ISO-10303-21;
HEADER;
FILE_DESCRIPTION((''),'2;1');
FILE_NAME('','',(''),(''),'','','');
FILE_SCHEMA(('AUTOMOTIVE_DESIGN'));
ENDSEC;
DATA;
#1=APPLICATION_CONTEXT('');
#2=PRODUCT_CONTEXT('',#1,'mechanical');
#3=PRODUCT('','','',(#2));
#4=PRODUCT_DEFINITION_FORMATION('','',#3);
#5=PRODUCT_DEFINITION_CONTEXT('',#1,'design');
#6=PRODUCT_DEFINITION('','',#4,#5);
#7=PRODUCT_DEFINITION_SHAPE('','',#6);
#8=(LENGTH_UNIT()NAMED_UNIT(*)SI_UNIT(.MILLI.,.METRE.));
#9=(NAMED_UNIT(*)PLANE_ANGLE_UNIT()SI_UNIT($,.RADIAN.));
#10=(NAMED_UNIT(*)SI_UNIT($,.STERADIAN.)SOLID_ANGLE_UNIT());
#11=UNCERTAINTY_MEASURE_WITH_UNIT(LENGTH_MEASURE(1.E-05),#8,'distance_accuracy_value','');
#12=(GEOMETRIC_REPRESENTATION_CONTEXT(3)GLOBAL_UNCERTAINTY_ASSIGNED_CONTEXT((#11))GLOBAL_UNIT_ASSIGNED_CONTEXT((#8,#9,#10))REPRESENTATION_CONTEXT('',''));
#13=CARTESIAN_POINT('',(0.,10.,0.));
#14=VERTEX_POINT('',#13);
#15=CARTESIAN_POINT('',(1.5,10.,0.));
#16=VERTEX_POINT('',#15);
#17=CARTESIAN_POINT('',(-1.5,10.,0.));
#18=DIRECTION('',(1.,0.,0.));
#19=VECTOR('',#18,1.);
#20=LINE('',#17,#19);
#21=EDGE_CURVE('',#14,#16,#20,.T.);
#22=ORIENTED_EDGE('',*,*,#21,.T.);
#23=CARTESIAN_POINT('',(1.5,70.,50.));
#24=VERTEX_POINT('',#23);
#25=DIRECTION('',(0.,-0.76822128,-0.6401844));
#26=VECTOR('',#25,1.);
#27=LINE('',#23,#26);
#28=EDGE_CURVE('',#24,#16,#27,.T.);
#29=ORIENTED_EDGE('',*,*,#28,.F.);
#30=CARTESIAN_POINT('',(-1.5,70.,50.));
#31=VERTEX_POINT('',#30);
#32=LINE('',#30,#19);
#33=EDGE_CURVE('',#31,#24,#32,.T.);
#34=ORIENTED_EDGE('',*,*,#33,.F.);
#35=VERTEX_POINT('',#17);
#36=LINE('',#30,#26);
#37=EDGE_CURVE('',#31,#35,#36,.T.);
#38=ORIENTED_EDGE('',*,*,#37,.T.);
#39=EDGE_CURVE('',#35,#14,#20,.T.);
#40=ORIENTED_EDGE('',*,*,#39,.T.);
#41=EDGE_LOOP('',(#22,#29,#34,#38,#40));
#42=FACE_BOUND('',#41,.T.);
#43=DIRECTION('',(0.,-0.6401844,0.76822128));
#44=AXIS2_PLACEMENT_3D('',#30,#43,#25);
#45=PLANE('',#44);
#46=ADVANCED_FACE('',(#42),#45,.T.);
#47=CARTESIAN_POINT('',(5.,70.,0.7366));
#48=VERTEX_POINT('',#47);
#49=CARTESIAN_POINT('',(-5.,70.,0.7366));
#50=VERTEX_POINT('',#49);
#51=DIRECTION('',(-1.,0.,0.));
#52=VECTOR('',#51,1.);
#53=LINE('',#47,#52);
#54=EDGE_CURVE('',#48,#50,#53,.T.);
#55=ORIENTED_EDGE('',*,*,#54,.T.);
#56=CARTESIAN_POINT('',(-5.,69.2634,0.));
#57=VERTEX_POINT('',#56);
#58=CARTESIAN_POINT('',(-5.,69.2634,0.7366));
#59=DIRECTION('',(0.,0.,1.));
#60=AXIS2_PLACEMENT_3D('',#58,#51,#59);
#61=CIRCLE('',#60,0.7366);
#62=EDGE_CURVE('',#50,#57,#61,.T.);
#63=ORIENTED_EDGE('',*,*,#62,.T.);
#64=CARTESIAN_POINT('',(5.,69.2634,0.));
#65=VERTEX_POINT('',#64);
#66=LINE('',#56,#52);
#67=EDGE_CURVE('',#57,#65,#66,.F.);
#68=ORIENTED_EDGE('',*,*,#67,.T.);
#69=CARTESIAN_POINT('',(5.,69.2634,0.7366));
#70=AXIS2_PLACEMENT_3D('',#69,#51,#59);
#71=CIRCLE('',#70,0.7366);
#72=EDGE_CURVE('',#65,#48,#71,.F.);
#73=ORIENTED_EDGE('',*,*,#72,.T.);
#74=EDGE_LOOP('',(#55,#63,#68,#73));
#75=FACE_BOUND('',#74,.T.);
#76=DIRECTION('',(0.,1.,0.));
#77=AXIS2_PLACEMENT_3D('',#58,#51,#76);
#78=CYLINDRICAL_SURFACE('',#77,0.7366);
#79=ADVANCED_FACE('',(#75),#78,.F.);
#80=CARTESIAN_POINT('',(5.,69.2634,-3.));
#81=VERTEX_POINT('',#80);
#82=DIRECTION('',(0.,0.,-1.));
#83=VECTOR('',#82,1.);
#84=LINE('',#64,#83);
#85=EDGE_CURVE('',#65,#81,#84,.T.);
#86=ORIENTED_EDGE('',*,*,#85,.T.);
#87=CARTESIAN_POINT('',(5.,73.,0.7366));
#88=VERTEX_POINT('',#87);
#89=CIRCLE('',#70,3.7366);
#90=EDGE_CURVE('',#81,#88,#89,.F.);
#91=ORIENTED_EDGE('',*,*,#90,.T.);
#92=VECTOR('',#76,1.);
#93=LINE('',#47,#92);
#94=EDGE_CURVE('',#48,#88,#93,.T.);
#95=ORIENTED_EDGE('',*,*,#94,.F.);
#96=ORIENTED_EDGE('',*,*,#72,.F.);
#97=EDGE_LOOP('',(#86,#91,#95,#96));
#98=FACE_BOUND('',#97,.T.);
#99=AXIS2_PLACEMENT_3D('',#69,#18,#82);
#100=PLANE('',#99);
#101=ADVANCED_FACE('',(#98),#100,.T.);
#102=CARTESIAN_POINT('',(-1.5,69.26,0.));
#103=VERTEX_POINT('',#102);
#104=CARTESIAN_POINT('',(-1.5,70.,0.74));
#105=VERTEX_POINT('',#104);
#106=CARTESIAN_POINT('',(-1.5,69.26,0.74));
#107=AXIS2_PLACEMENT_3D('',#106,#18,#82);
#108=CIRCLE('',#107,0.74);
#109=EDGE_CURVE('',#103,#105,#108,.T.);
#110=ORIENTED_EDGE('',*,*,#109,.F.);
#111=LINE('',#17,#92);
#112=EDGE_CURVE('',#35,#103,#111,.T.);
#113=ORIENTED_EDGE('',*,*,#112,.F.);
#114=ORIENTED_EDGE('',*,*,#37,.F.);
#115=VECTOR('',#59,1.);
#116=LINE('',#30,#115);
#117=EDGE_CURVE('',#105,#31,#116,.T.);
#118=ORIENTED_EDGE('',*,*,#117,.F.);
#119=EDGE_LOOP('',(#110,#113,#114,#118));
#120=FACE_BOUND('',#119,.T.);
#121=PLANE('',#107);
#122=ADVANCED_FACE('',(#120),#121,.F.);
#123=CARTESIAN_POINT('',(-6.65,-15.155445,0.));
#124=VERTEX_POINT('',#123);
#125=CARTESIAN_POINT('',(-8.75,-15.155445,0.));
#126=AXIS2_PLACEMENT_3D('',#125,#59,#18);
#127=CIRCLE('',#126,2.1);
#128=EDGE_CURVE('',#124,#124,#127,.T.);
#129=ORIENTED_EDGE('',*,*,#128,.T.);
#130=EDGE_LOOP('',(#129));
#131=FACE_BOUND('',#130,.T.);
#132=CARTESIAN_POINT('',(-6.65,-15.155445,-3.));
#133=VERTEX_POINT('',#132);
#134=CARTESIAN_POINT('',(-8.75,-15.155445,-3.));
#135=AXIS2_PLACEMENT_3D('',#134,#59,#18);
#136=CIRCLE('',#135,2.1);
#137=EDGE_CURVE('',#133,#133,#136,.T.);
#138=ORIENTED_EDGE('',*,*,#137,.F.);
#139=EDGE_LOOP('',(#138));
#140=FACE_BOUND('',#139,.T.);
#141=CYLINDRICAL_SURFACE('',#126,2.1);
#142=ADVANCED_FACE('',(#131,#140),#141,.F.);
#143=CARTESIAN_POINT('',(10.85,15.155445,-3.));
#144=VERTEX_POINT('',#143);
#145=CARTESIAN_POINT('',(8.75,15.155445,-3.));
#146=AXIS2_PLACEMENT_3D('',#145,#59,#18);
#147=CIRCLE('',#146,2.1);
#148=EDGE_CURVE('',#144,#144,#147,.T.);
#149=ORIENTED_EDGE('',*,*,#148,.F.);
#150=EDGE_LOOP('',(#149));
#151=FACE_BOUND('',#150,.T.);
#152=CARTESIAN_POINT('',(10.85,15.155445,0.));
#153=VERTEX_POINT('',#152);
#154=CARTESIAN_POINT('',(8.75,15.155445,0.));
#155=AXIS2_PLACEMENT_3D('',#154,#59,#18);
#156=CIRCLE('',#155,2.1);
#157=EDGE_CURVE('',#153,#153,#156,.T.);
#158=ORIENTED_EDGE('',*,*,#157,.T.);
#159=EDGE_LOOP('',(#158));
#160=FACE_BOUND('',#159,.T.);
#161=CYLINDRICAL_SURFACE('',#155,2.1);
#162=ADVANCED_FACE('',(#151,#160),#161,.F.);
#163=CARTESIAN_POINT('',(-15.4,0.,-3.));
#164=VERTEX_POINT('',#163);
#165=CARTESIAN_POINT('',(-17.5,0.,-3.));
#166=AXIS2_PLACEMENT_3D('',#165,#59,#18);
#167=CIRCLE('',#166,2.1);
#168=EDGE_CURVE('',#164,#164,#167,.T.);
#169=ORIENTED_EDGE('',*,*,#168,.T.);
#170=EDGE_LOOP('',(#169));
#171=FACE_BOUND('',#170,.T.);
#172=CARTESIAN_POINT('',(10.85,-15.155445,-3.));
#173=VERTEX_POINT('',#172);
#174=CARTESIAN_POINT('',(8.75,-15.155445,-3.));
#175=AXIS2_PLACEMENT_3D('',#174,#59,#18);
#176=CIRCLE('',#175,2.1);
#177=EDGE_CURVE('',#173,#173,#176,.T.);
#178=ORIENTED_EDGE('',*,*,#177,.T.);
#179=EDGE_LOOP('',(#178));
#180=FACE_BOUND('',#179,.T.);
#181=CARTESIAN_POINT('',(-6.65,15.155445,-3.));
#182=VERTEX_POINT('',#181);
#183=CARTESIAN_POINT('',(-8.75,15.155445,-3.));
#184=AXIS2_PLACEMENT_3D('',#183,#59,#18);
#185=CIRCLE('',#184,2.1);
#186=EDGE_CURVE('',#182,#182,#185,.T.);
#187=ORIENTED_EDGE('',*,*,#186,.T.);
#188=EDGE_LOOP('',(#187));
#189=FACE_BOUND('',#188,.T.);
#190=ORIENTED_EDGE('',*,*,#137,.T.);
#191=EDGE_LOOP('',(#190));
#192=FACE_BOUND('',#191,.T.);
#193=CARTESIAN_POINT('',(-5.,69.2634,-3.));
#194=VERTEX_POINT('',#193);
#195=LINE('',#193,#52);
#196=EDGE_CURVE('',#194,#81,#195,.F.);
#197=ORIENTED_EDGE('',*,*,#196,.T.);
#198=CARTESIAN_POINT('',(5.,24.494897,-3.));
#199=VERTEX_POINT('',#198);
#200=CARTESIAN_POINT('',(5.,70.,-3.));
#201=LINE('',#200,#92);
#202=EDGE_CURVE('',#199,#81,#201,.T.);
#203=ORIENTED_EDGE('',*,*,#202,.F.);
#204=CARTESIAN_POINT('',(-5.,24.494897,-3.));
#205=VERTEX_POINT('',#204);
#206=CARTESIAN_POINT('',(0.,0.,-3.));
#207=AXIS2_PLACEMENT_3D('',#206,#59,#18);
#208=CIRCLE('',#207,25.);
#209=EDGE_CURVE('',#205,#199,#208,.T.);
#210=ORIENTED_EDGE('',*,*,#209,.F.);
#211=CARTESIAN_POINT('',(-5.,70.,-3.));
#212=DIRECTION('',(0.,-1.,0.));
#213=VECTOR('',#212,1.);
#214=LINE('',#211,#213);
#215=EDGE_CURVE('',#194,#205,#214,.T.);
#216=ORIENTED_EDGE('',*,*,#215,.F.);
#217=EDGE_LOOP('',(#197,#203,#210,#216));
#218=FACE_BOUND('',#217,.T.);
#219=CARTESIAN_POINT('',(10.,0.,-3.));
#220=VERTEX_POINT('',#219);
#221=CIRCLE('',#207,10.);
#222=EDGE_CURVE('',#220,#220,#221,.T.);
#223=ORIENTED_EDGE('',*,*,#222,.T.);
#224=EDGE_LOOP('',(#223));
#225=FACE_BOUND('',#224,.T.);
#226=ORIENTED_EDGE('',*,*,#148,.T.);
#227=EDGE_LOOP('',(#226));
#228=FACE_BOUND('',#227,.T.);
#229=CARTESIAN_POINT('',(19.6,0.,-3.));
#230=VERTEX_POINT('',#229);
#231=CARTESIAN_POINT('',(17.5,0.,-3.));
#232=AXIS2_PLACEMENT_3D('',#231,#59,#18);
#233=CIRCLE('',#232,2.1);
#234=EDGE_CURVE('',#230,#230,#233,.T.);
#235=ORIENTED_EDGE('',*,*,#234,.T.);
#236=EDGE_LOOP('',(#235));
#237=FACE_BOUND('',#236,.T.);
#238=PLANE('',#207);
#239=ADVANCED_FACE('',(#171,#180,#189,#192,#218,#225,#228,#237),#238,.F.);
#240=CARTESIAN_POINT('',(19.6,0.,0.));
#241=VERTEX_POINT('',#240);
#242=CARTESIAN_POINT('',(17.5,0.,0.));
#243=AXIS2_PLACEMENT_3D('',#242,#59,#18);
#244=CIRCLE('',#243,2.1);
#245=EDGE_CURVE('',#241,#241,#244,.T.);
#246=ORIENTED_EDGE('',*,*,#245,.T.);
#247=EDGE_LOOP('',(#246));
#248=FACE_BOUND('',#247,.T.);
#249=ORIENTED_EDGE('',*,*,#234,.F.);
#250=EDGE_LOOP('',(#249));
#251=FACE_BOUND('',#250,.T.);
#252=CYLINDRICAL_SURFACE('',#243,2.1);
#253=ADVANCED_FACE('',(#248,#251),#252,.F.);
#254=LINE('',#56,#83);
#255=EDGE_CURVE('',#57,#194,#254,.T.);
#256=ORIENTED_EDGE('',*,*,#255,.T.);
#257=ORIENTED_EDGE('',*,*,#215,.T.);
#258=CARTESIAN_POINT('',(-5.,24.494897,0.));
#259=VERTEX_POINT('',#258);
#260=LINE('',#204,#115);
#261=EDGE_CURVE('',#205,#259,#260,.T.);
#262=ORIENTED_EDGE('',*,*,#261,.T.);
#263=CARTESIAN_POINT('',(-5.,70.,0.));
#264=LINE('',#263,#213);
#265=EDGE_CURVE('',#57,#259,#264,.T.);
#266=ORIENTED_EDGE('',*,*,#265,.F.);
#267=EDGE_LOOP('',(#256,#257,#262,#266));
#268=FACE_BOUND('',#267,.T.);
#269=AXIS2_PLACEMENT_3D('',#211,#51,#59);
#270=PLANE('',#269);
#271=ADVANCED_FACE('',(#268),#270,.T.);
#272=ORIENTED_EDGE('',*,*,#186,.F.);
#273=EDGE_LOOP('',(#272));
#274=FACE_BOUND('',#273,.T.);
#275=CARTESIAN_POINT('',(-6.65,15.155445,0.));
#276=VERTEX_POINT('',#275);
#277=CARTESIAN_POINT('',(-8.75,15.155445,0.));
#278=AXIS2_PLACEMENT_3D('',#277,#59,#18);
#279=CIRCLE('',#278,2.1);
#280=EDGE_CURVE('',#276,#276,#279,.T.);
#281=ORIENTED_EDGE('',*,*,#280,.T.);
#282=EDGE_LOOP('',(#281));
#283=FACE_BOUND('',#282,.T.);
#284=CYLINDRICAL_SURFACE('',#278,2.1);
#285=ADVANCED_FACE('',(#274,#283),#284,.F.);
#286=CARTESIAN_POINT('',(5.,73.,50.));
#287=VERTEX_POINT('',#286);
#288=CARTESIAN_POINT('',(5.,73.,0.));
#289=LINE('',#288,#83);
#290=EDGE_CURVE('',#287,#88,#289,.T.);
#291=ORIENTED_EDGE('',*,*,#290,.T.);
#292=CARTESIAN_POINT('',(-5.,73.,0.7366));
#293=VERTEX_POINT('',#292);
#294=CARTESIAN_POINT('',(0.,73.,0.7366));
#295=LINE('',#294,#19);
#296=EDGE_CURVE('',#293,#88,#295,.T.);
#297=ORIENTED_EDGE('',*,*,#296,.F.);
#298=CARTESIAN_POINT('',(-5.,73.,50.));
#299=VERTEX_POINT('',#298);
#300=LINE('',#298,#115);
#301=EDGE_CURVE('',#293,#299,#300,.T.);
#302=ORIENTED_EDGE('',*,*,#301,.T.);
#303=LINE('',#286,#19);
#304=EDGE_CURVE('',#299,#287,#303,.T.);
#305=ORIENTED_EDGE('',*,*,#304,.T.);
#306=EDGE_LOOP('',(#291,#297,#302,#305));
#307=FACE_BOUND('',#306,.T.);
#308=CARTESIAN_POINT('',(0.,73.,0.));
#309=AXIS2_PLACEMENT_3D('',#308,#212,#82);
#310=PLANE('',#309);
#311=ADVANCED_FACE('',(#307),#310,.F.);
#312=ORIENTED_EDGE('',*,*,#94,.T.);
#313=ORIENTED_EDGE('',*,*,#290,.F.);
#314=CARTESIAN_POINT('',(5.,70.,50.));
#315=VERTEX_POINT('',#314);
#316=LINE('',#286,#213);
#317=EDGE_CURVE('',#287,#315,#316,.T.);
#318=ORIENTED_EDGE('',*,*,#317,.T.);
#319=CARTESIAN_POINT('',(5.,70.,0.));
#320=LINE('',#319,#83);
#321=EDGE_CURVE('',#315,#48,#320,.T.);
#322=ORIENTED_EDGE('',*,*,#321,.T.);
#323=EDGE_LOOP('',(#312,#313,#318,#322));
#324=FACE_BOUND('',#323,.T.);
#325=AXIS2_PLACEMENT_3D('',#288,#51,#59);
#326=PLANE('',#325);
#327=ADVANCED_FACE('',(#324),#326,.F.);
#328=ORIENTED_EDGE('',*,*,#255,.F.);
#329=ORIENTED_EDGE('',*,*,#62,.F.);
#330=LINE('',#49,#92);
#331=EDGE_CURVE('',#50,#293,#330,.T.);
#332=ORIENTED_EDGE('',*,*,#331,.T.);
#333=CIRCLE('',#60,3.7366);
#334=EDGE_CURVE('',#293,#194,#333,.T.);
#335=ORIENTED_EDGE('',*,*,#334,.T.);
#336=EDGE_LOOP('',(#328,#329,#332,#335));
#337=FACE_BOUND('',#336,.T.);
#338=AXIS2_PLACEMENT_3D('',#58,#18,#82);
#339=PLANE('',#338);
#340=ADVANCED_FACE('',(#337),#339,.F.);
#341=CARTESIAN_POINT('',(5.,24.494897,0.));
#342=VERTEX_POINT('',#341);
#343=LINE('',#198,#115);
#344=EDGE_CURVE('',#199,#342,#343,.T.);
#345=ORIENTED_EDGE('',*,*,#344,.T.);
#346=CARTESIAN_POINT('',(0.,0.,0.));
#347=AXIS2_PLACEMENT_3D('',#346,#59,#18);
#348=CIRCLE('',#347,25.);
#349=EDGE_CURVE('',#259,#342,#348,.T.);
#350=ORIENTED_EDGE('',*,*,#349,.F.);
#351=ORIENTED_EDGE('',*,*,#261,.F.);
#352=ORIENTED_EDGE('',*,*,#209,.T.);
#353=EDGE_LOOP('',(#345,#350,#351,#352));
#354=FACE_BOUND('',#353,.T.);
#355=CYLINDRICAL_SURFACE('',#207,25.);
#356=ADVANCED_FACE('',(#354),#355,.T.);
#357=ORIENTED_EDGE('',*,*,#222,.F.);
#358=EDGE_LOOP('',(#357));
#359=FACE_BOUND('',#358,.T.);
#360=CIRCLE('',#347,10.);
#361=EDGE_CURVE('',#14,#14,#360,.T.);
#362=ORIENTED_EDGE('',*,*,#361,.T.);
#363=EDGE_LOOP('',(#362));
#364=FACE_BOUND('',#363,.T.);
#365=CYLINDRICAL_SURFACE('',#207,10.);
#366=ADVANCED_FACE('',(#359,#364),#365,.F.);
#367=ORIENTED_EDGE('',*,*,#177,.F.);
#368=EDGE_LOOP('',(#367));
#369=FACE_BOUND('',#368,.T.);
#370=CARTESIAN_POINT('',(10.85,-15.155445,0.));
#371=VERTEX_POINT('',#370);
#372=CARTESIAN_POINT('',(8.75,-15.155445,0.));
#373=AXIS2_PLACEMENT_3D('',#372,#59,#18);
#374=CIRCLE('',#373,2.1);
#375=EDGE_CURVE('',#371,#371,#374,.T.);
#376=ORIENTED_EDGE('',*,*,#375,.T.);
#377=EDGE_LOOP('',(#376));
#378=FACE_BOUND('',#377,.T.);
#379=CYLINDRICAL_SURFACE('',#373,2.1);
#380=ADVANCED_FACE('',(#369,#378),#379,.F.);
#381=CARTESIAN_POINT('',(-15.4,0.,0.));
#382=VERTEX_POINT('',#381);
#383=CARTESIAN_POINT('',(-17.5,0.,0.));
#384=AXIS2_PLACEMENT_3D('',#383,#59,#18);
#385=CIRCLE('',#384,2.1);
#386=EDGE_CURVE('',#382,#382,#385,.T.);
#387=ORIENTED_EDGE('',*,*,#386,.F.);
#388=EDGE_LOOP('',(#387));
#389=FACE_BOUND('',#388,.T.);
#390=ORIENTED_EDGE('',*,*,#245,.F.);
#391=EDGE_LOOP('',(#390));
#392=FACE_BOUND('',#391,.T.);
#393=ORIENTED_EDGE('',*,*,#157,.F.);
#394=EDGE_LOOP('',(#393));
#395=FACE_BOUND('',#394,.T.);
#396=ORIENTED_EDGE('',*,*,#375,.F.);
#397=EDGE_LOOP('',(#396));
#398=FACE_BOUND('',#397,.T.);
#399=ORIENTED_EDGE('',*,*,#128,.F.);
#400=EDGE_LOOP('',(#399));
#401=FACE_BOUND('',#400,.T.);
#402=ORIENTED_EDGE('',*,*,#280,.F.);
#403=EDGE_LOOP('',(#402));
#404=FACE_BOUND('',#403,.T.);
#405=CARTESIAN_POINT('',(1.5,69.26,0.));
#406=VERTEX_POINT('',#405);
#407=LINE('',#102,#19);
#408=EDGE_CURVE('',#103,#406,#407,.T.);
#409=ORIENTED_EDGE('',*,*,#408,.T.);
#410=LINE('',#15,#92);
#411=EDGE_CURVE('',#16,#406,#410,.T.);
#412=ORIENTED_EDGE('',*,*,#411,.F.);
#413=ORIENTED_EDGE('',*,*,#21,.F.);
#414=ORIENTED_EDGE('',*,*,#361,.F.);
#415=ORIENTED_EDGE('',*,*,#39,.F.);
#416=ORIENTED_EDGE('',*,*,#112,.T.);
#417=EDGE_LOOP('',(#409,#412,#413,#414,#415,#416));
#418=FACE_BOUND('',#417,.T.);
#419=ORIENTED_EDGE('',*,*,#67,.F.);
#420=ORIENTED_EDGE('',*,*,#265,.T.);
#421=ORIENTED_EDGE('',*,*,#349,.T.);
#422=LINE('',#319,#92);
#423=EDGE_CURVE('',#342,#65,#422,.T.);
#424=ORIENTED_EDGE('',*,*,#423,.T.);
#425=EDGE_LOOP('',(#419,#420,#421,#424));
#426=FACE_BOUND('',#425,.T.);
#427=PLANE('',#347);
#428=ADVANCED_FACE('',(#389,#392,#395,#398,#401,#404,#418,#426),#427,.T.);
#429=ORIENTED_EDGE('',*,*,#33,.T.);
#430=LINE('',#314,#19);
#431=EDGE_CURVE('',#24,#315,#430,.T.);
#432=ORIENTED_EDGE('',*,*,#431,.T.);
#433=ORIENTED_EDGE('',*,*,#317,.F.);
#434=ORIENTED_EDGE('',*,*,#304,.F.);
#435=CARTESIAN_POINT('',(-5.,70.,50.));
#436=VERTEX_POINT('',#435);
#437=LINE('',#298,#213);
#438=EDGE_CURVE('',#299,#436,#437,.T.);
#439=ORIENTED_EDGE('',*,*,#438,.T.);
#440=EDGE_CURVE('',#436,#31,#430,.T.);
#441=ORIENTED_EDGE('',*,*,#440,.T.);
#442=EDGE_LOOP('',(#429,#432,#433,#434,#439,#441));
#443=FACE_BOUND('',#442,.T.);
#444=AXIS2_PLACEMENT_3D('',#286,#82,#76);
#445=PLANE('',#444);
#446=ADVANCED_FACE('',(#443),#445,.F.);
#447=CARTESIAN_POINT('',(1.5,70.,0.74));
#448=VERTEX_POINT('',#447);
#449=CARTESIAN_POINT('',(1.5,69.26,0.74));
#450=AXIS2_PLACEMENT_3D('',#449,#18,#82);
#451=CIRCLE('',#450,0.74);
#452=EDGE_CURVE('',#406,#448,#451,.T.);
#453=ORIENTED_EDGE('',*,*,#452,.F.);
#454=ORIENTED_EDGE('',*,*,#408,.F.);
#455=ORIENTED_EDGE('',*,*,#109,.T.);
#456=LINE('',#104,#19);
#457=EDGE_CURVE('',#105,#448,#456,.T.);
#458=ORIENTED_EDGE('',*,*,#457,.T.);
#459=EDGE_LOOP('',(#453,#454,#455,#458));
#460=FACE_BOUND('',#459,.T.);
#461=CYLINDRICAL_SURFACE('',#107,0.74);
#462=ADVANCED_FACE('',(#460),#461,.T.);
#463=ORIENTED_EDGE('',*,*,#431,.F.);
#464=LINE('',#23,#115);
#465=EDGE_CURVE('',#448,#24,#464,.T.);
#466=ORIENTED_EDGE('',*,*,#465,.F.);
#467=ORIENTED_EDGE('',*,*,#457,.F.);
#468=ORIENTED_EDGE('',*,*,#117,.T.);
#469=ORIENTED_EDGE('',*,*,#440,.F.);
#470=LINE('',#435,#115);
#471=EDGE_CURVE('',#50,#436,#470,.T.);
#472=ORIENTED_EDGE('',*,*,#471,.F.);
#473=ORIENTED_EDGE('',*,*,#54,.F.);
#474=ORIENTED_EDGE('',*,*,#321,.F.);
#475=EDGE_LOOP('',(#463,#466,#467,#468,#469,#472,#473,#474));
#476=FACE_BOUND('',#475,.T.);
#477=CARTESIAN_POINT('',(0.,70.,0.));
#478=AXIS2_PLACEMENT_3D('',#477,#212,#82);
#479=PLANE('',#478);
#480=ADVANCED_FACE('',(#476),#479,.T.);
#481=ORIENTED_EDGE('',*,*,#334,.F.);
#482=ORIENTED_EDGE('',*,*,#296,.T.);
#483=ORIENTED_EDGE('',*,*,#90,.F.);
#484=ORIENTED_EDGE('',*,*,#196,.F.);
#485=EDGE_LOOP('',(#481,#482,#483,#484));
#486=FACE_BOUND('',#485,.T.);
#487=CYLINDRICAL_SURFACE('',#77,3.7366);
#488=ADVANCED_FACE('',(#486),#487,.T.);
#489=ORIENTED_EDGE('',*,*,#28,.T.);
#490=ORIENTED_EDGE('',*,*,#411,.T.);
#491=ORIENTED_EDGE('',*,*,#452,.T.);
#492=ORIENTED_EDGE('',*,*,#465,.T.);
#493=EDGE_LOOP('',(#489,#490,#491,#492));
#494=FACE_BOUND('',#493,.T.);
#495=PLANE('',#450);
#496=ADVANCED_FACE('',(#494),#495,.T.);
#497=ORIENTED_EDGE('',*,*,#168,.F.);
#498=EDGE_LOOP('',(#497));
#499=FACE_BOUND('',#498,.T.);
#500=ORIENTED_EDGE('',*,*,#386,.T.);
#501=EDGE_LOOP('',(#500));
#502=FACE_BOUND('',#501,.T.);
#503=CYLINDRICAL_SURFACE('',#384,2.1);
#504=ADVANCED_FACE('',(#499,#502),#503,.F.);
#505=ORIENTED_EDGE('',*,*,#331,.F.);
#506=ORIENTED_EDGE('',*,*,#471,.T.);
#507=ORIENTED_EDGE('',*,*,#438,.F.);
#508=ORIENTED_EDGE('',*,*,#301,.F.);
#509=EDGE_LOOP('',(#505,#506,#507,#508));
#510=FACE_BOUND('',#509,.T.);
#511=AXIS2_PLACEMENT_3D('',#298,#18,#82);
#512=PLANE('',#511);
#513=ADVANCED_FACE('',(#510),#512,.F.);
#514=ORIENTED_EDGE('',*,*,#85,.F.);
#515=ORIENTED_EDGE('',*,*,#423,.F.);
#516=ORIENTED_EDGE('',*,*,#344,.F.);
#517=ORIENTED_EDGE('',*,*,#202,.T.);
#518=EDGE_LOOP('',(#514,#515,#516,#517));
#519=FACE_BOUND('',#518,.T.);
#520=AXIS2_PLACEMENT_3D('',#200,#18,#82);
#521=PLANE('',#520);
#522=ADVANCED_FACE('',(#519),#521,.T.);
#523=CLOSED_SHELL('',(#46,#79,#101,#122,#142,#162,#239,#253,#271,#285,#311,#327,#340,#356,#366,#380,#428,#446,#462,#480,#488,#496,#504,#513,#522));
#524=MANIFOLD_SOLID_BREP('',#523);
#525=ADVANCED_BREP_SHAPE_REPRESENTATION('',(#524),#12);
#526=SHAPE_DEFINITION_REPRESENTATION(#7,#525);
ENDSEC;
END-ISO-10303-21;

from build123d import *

# Parameters (mm, degrees)
BASE_FLANGE2_START           = -3
BASE_FLANGE2_OUTLINE_R       = 10
BASE_FLANGE2_DEPTH           = 3
EDGE_FLANGE1_STRIP_W         = 13.4732
EDGE_FLANGE1_STRIP_H         = 3
EDGE_FLANGE1_STRIP_CUT_DEPTH = 10
EDGE_FLANGE1_DEPTH           = 10
BOSS_EXTRUDE1_START          = -3.5
BOSS_EXTRUDE1_DEPTH          = 3
TAP_DRILL_FOR_M5X0_8_TAP2_D  = 4.2
CIRPATTERN2_COUNT            = 6


# Read off the part's stored shape, not the designer's step: Base-Flange2
# Sheet-metal steps are written as plain solids
with BuildPart() as part:
    # Base-Flange2 outline → Base-Flange2 (new body)
    with BuildSketch(Plane.XY.offset(BASE_FLANGE2_START)):
        with BuildLine():
            Line((5, 70), (-5, 70))
            Line((-5, 70), (-5, 24.494897428))
            ThreePointArc((-5, 24.494897428), (0, -25), (5, 24.494897428))
            Line((5, 24.494897428), (5, 70))
        make_face()
        Circle(BASE_FLANGE2_OUTLINE_R, mode=Mode.SUBTRACT)
    extrude(amount=BASE_FLANGE2_DEPTH)

    # Edge-Flange1 strip (across the edge) → Edge-Flange1 strip cut (cut)
    with BuildSketch(Plane(origin=(5, 70, 0), x_dir=(0, -1, 0), z_dir=(-1, 0, 0))):
        with Locations((-6, -1.5)):
            Rectangle(EDGE_FLANGE1_STRIP_W, EDGE_FLANGE1_STRIP_H)
    extrude(amount=EDGE_FLANGE1_STRIP_CUT_DEPTH, mode=Mode.SUBTRACT)

    # Edge-Flange1 section (across the edge) → Edge-Flange1 (add)
    with BuildSketch(Plane(origin=(5, 70, 0), x_dir=(0, -1, 0), z_dir=(-1, 0, 0))):
        with BuildLine():
            Line((-3, 0.7366), (-3, 50))
            Line((-3, 50), (0, 50))
            Line((0, 50), (0, 0.7366))
            ThreePointArc((0, 0.7366), (0.215745145, 0.215745145), (0.7366, 0))
            Line((0.7366, 0), (0.7366, -3))
            ThreePointArc((0.7366, -3), (-1.905575199, -1.905575199), (-3, 0.7366))
        make_face()
    extrude(amount=EDGE_FLANGE1_DEPTH)

    # Sketch13 → Boss-Extrude1 (add)
    with BuildSketch(Plane(origin=(5, 0, 0), x_dir=(0, 0, -1), z_dir=(1, 0, 0)).offset(BOSS_EXTRUDE1_START)):
        with BuildLine():
            Line((-50, 70), (-0.74, 70))
            ThreePointArc((-0.74, 70), (-0.216740982, 69.783259018), (0, 69.26))
            Line((0, 69.26), (0, 10))
            Line((0, 10), (-50, 70))
        make_face()
    extrude(amount=-BOSS_EXTRUDE1_DEPTH)

    # Tap Drill for M5x0.8 Tap2 (through all)
    with Locations(Plane.XY):
        with Locations((17.5, 0)):
            tap_drill_for_m5x0_8_tap2 = Hole(TAP_DRILL_FOR_M5X0_8_TAP2_D / 2)

    # CirPattern2: Tap Drill for M5x0.8 Tap2 ×6 about axis
    cirpattern2_axis = Axis((0, 0, 0), (0, 0, 1))
    for i in range(1, CIRPATTERN2_COUNT):
        add(tap_drill_for_m5x0_8_tap2.rotate(cirpattern2_axis, i * 360 / CIRPATTERN2_COUNT), mode=Mode.SUBTRACT)


solid = part.part
